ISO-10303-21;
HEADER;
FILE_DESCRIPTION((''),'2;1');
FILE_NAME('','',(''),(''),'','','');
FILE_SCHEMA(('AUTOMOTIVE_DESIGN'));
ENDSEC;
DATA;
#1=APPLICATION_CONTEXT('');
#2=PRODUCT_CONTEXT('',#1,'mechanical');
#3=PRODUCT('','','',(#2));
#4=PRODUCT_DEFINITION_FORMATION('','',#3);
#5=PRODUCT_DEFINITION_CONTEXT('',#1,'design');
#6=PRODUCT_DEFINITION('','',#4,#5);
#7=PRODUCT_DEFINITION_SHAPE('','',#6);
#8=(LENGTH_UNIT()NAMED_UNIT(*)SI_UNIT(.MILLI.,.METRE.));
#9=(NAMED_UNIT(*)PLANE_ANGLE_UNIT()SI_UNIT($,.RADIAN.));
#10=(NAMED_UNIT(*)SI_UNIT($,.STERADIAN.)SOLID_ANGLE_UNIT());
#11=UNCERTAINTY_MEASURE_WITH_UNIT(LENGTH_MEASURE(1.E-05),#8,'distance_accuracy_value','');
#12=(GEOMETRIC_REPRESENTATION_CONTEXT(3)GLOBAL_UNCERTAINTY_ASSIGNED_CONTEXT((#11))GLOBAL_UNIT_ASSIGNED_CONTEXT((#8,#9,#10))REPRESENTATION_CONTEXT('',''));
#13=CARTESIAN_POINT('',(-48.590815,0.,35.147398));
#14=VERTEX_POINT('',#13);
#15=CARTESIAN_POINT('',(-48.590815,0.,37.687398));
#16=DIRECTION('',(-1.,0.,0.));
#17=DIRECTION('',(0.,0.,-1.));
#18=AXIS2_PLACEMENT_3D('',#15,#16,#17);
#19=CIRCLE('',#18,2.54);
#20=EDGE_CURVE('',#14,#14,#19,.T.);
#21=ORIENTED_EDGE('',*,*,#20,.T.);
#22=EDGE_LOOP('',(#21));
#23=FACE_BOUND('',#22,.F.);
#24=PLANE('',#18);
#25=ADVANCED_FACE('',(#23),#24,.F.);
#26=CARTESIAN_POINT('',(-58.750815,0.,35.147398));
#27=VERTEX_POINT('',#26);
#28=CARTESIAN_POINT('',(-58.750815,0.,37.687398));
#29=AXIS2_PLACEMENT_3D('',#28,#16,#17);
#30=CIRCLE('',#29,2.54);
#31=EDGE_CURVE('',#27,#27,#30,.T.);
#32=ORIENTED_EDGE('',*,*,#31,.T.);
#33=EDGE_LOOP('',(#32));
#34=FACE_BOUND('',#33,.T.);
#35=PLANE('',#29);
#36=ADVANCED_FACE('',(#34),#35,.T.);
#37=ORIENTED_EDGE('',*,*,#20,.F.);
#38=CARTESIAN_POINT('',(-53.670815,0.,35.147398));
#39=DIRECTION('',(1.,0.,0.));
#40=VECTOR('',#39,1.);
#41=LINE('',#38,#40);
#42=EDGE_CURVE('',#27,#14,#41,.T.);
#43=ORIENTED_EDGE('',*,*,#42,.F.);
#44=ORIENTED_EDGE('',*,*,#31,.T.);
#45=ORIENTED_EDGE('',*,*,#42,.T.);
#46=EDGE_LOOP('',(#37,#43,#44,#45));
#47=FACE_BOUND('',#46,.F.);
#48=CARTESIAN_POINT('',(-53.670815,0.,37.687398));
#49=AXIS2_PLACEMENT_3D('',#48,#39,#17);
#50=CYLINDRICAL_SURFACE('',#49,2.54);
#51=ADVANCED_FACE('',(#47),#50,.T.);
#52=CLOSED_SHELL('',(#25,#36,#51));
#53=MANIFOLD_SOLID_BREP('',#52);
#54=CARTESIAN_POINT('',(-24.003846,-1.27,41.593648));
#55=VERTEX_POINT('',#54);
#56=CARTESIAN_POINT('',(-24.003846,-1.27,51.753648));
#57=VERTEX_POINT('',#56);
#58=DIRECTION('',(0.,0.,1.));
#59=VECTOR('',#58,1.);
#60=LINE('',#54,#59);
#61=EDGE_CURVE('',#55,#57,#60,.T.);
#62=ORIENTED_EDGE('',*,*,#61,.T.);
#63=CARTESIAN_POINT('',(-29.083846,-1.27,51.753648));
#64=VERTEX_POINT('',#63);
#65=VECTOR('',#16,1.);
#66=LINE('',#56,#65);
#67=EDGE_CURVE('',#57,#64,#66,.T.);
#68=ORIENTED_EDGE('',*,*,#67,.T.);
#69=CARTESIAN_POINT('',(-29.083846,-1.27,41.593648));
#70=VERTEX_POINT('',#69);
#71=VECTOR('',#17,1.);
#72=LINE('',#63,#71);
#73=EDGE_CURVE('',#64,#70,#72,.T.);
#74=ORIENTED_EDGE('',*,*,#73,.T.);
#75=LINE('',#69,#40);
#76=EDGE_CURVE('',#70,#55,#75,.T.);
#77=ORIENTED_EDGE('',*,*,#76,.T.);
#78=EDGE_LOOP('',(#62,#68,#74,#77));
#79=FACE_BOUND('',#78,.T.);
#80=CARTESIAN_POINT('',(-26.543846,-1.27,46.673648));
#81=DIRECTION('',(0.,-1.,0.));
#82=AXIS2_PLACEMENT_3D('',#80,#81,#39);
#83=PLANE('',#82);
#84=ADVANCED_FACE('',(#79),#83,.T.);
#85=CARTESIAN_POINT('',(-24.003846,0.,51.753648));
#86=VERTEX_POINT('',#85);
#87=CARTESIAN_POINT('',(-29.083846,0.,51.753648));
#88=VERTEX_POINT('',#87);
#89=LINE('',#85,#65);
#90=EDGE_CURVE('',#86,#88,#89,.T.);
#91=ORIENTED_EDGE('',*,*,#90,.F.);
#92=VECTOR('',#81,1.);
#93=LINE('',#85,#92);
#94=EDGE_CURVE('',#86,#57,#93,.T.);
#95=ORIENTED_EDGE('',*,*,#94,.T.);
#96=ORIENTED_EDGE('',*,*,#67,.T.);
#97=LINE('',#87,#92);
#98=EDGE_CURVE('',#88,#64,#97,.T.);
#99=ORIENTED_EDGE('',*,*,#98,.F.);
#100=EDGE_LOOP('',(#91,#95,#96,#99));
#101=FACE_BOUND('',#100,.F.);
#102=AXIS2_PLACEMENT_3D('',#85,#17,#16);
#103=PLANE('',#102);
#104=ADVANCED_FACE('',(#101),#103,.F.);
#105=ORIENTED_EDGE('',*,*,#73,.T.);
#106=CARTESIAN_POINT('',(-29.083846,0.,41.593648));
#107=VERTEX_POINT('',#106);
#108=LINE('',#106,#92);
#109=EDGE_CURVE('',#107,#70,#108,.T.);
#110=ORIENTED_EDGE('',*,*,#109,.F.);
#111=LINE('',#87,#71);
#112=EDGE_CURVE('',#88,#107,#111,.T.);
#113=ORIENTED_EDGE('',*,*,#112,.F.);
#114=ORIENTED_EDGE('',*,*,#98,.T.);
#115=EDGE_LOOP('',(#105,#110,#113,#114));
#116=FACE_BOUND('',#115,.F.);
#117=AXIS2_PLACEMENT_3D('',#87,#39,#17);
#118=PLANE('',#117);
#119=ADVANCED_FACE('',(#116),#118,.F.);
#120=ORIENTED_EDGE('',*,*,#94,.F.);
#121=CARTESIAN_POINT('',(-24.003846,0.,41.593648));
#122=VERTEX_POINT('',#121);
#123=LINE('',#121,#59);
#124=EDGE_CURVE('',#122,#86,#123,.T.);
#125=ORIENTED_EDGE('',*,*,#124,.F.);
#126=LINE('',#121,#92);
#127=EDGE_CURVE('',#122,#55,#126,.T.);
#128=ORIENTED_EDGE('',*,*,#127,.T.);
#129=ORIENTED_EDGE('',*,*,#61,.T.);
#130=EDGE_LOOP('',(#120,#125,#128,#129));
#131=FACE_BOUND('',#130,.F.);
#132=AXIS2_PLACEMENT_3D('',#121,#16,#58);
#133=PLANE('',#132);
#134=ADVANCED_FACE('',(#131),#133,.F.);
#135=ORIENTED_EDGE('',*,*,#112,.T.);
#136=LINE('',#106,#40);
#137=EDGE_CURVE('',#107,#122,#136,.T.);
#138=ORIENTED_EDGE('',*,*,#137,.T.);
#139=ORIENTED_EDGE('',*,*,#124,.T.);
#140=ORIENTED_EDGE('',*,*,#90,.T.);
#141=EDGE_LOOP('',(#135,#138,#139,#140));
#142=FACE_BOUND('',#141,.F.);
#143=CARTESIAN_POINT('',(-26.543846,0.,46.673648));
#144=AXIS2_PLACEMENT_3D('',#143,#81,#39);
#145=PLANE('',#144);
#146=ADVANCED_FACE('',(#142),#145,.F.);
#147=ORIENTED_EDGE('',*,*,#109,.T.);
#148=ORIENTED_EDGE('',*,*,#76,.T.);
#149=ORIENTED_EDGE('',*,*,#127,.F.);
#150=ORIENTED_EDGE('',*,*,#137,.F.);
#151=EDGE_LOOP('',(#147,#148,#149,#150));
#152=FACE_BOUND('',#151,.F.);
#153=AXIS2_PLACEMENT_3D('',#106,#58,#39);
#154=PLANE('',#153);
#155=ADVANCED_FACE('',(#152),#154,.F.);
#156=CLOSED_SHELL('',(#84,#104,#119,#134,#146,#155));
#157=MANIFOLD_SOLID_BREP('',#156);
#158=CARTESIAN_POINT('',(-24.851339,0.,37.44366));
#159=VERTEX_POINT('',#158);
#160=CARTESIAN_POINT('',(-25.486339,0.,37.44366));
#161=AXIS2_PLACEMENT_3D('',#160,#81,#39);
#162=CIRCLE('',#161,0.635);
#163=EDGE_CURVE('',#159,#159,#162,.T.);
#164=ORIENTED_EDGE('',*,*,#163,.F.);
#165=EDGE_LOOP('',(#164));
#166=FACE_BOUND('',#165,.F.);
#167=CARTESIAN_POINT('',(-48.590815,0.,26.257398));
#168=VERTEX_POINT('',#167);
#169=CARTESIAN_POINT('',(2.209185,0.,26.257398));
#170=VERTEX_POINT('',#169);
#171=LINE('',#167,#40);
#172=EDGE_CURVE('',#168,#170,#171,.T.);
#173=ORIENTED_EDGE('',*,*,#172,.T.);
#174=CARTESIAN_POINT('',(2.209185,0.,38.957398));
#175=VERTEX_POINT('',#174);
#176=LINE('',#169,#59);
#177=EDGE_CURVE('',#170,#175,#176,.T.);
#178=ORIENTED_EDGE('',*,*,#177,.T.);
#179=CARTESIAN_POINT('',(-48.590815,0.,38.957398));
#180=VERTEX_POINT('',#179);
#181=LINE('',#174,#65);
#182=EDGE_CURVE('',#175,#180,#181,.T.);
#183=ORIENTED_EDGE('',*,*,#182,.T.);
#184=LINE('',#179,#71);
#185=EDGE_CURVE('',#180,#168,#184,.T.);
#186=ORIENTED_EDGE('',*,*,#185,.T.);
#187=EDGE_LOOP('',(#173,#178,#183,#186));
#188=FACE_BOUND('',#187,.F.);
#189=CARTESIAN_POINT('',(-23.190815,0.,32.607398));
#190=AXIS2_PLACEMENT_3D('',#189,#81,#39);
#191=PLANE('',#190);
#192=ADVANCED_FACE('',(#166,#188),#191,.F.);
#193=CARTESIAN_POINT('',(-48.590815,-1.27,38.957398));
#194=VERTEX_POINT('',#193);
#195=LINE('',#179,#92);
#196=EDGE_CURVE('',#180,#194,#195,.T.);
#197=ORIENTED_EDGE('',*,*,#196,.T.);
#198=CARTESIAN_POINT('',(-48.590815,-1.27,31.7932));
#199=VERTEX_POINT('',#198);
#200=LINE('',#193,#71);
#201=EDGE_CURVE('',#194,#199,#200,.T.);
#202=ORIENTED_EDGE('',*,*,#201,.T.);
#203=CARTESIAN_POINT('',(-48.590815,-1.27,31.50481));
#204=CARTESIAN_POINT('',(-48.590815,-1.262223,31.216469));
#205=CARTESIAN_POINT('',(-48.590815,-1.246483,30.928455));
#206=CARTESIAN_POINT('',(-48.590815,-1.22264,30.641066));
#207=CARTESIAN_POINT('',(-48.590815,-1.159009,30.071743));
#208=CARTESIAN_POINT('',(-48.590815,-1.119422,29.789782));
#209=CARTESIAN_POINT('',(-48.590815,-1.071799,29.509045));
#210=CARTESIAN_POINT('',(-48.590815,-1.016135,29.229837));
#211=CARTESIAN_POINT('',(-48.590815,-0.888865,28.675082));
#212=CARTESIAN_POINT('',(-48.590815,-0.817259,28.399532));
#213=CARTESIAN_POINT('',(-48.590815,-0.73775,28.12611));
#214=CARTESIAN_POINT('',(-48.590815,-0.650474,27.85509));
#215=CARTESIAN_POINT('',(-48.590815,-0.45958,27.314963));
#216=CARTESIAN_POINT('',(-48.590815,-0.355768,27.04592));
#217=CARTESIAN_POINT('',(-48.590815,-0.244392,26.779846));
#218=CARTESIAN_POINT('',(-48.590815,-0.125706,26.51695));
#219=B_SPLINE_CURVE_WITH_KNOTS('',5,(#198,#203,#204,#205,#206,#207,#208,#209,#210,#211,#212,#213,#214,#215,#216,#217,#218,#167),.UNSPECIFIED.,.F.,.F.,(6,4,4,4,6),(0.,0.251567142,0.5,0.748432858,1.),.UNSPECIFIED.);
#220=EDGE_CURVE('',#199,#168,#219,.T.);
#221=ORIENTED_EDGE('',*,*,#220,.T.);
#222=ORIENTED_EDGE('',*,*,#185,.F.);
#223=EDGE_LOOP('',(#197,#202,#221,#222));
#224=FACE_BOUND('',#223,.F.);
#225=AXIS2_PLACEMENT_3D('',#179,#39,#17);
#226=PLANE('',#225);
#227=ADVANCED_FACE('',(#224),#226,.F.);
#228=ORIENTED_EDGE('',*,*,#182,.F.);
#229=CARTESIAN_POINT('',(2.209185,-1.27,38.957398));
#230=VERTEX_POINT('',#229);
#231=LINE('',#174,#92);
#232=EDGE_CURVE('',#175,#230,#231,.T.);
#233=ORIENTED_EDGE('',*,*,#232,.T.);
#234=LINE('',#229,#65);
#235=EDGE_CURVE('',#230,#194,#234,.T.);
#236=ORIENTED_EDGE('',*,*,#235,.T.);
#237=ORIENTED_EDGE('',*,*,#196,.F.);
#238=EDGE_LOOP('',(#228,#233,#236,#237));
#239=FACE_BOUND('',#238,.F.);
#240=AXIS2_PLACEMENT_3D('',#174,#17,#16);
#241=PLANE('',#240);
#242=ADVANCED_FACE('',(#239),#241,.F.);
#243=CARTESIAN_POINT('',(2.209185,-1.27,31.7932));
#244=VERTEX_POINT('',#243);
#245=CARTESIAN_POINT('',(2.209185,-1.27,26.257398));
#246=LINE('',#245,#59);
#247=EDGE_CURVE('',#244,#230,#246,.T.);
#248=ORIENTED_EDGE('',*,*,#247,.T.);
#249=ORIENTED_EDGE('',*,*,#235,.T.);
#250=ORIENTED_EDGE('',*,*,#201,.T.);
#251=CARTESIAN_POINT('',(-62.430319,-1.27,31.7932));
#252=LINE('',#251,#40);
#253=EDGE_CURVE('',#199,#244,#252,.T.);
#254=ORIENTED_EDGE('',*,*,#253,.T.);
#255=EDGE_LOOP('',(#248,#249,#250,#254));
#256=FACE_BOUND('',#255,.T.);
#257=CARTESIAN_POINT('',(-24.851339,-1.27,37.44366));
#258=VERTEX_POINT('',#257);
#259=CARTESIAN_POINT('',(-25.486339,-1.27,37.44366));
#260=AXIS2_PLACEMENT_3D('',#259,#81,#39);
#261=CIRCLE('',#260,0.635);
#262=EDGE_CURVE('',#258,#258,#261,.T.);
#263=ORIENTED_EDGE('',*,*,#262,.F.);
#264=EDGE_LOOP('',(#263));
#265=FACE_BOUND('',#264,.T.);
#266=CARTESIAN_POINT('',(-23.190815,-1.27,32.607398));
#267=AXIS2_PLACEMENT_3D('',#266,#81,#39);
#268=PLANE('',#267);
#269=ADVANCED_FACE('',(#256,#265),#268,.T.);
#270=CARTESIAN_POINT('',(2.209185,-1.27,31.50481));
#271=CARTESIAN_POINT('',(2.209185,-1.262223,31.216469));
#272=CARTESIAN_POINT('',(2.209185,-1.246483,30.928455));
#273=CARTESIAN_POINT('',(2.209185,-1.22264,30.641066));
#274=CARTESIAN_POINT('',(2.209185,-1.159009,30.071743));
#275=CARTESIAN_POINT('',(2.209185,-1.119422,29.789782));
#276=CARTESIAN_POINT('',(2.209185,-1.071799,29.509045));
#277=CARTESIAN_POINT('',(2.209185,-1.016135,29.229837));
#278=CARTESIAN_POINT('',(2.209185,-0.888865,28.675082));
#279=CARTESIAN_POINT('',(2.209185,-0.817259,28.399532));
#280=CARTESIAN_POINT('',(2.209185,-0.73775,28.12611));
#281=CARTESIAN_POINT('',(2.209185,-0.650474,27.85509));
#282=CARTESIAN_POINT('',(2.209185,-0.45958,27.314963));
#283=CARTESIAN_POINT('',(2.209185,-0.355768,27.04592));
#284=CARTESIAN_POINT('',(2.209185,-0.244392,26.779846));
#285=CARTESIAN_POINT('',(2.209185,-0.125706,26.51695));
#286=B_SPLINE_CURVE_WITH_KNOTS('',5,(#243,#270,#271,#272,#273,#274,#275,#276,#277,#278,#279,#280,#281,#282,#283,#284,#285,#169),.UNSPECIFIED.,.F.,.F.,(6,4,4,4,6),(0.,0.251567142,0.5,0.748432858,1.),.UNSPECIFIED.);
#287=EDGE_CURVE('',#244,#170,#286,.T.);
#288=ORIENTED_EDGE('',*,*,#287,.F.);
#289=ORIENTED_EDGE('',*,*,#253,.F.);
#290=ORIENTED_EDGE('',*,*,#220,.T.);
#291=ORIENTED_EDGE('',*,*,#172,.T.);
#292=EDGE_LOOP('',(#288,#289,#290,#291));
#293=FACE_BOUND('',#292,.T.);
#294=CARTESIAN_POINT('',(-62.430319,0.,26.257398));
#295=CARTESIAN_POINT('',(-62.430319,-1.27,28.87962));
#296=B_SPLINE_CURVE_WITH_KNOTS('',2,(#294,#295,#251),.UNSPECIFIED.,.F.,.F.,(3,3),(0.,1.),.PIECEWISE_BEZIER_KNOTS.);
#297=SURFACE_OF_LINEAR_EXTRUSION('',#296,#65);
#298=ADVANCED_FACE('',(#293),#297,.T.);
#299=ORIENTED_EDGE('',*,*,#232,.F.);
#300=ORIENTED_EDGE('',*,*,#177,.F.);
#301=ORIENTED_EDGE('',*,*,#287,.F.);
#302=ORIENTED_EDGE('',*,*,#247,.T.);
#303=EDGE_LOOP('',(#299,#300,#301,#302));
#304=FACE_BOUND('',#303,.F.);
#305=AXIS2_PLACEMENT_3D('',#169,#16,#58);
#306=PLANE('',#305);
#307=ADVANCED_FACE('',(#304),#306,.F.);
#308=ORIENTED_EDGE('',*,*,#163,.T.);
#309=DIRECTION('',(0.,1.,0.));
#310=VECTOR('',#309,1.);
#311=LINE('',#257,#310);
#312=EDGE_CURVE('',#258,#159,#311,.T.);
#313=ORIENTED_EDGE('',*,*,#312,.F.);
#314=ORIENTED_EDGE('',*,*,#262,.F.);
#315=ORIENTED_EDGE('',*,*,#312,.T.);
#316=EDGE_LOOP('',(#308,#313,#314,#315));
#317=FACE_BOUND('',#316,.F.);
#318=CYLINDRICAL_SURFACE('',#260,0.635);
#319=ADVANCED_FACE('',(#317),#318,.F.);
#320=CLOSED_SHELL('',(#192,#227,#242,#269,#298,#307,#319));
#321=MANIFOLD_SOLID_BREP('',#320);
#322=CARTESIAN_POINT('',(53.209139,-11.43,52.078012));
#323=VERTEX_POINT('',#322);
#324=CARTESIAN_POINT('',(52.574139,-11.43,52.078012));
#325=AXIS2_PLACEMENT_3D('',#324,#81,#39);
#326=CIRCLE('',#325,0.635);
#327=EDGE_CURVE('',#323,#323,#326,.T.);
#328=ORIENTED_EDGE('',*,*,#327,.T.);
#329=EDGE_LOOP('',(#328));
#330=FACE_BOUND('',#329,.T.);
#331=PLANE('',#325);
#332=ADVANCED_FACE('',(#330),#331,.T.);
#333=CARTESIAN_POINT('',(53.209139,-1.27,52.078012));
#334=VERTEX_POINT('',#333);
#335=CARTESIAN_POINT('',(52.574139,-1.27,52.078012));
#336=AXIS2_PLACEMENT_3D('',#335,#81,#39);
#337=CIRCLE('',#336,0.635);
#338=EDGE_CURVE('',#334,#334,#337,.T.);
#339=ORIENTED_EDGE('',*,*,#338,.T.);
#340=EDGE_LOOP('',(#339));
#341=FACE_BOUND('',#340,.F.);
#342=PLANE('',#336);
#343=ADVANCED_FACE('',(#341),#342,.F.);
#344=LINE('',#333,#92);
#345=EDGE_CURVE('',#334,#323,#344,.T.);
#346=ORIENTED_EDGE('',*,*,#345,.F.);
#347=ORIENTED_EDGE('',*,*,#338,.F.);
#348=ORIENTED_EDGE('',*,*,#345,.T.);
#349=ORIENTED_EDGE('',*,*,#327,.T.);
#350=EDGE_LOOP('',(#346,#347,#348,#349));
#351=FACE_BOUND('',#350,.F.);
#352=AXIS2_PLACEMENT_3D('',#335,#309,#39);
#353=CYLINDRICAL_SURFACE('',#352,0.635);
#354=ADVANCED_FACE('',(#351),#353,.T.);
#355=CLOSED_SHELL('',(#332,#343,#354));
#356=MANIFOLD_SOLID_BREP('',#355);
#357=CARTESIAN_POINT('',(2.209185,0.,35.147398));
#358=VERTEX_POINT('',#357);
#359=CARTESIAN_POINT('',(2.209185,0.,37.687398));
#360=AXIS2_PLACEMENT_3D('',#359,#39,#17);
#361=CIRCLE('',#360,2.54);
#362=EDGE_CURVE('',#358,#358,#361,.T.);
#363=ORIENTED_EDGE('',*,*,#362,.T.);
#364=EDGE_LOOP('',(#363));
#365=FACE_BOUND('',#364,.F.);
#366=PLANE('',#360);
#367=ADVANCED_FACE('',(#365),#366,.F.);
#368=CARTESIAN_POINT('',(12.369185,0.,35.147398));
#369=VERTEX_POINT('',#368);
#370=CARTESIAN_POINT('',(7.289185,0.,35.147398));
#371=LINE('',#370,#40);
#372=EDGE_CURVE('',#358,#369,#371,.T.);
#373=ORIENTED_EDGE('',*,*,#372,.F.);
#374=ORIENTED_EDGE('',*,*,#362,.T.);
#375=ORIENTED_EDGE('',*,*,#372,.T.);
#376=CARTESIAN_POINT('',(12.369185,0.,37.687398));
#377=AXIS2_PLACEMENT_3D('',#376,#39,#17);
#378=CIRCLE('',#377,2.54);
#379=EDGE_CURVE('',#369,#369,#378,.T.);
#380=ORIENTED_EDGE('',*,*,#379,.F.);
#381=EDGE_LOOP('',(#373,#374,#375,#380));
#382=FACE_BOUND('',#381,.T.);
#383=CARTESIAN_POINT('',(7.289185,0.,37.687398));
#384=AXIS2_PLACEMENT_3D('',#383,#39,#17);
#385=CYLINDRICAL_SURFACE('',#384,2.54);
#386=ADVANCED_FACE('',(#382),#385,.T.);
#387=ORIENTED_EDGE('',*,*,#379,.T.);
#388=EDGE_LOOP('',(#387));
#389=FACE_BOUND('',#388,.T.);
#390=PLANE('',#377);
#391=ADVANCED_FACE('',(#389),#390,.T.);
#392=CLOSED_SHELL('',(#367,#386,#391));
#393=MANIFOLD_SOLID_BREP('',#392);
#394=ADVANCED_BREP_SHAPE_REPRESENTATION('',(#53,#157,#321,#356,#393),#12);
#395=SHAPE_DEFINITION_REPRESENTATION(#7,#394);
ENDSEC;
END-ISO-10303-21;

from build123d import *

# Parameters (mm, degrees)
F0_W        = 10.16
F0_H        = 2.54
F3_DEPTH    = 1.27
F4_T1_DEPTH = 78.4790082915
F5_R        = 0.635
F6_DEPTH    = 3.811
F7_DEPTH    = 10.16
F8_DEPTH    = 1.27


# Not quite as in the source:
# - a fillet or chamfer that OpenCascade refuses, or shapes differently, is made with other operations: its cross-section is extruded or revolved along the edge and cut away or added


with BuildPart() as f1:
    # F0 (on Front) → F1 (revolve)
    with BuildSketch(Plane.XZ):
        with Locations((-53.6708150854, 36.4173984443)):
            Rectangle(F0_W, F0_H)
    revolve(axis=Axis((-53.6708150854, 0, 37.6873984443), (-1, 0, 0)))


with BuildPart() as f2:
    # F0 (on Front) → F2 (revolve)
    with BuildSketch(Plane.XZ):
        with Locations((7.2891849146, 36.4173984443)):
            Rectangle(F0_W, F0_H)
    revolve(axis=Axis((7.2891849146, 0, 37.6873984443), (1, 0, 0)))


with BuildPart() as f3:
    # F0 (on Front) → F3 (new body)
    with BuildSketch(Plane.XZ):
        Polygon((-48.5908150854, 26.2573984443), (2.2091849146, 26.2573984443), (2.2091849146, 35.1473984443), (2.2091849146, 37.6873984443), (2.2091849146, 38.9573984443), (-48.5908150854, 38.9573984443), (-48.5908150854, 37.6873984443), (-48.5908150854, 35.1473984443), align=None)
    extrude(amount=F3_DEPTH)

    # F4: fillet of radius 12.7 on 1 edges, made by hand

    # F4_s2 → F4_t1 (cut)
    with BuildSketch(Plane.YZ.offset(-62.4303192311)):
        with BuildLine():
            add(Edge.make_bspline(
                [(0, 26.2573984443), (-1.27, 28.8796202825), (-1.27, 31.7932001026)],
                knots=[0, 0, 0, 1, 1, 1], degree=2, weights=[1, 1, 1]))
            Line((-1.27, 31.7932001026), (-1.524, 31.7932001026))
            Line((-1.524, 31.7932001026), (-1.524, 26.2573984443))
            Line((-1.524, 26.2573984443), (-1.27, 26.0033984443))
            ThreePointArc((-1.27, 26.0033984443), (-0.635, 26.0033984443), (-0.2286, 26.1466824112))
            Line((-0.2286, 26.1466824112), (0, 26.2573984443))
        make_face()
    extrude(amount=F4_T1_DEPTH, mode=Mode.SUBTRACT)

    # F5 (on face) → F6 (cut, through all)
    with BuildSketch(Plane.XZ.offset(1.27)):
        with Locations((-25.4863388836, 37.4436601996)):
            Circle(F5_R)
    extrude(amount=-F6_DEPTH, mode=Mode.SUBTRACT)


with BuildPart() as f7:
    # F5 (on face) → F7 (new body)
    with BuildSketch(Plane.XZ.offset(1.27)):
        with Locations((52.5741390884, 52.078012377)):
            Circle(F5_R)
    extrude(amount=F7_DEPTH)


with BuildPart() as f8:
    # F0 (on Front) → F8 (new body)
    with BuildSketch(Plane.XZ):
        Polygon((-29.0838461369, 51.7536484933), (-29.0838461369, 45.0394451618), (-29.0838461369, 41.5936484933), (-24.0038461369, 41.5936484933), (-24.0038461369, 51.7536484933), align=None)
    extrude(amount=F8_DEPTH)


solid = Compound([f1.part, f2.part, f3.part, f7.part, f8.part])
